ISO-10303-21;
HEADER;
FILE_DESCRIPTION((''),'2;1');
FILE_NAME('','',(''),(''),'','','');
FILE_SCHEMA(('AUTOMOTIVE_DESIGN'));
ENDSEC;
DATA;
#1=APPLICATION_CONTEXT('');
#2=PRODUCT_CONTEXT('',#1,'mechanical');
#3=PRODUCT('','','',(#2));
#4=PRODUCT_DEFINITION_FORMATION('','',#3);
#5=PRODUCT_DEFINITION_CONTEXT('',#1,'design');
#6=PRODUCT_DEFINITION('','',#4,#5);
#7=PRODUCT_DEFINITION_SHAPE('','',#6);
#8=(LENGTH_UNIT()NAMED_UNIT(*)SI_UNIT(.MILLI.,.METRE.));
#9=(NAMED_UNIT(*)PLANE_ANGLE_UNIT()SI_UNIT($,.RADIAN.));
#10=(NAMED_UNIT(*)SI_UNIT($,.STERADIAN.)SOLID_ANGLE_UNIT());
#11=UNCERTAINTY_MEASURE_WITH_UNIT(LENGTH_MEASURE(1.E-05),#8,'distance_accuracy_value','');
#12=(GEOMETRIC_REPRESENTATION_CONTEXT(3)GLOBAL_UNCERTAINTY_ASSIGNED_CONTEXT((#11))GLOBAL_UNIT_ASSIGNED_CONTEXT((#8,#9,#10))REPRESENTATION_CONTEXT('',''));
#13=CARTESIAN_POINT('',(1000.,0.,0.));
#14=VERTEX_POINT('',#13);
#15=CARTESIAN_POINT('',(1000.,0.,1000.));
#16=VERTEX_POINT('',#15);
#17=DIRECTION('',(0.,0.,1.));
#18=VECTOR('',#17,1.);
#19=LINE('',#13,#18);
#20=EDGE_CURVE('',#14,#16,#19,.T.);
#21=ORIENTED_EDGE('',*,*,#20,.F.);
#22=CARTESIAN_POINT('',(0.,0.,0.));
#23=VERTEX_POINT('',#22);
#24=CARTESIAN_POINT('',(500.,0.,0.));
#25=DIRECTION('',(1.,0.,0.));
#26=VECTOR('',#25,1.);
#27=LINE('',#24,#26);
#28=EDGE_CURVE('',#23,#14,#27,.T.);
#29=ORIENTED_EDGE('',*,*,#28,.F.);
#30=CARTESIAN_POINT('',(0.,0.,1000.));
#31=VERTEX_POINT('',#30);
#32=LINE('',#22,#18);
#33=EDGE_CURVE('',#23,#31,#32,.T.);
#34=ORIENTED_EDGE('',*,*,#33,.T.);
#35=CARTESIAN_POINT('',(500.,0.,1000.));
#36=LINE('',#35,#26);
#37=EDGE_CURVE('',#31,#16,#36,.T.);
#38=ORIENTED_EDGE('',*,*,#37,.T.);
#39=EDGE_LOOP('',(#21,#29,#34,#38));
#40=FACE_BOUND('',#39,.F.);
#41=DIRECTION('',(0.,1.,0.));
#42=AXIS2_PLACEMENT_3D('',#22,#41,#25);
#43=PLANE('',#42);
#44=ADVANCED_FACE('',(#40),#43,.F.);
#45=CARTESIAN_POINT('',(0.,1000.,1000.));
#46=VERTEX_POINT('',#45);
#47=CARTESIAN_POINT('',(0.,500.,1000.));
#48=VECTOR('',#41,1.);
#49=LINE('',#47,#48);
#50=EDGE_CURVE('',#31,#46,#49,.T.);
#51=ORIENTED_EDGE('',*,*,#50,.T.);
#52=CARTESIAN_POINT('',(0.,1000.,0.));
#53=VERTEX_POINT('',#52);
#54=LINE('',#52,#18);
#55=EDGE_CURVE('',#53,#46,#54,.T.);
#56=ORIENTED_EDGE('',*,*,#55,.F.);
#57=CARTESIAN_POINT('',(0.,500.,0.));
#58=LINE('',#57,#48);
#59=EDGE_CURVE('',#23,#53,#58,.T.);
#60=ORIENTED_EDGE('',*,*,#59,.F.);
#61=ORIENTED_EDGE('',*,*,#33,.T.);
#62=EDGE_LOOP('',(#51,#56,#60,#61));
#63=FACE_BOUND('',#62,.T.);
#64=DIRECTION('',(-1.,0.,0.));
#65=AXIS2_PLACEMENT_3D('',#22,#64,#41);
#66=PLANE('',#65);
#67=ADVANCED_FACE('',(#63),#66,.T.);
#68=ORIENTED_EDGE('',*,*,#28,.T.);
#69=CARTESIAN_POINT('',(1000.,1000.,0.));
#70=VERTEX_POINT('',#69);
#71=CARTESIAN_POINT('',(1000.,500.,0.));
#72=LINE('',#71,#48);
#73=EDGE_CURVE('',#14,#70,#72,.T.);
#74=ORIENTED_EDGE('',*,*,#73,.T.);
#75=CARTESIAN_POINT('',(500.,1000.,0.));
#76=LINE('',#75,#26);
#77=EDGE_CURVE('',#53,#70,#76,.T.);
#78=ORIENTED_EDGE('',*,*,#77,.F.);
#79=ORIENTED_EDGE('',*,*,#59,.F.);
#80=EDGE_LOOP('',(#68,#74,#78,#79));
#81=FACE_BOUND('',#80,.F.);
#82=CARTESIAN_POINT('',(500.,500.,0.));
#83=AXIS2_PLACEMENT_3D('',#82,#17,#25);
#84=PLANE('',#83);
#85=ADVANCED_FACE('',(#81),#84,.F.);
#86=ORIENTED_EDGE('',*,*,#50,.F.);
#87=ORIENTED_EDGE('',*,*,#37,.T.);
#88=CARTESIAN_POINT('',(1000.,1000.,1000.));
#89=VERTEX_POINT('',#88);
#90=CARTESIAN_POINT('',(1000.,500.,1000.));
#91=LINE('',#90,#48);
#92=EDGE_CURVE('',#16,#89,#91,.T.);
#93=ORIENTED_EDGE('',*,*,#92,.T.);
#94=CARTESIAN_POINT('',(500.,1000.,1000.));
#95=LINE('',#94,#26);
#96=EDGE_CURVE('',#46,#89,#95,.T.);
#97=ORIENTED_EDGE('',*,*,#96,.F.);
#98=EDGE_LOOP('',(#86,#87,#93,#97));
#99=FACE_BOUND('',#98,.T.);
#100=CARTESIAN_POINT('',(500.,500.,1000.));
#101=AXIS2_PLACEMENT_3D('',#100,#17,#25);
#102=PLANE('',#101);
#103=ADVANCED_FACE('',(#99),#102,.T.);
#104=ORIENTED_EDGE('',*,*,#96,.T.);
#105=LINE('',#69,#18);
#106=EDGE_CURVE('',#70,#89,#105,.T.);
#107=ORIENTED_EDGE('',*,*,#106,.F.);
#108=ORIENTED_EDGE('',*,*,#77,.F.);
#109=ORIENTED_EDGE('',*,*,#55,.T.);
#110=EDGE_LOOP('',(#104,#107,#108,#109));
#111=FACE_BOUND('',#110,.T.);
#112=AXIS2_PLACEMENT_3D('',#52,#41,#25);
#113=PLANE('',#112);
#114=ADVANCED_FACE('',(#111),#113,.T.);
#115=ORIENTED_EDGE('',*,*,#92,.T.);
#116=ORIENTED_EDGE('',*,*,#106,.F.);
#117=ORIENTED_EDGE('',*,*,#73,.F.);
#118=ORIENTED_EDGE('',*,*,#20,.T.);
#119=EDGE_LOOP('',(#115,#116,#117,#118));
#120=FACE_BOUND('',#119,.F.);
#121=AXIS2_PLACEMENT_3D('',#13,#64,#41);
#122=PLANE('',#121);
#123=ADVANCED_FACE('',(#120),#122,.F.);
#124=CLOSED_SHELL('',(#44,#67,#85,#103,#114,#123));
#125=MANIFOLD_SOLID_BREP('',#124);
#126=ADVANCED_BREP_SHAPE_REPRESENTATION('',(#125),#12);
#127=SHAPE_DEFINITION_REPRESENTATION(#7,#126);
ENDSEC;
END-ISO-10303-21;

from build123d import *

# Parameters (mm, degrees)
F1_E0_W  = 1000
F1_E0_H  = 1000
F2_DEPTH = 1000


with BuildPart() as f2:
    # F1_E0 (on explicit) → F2 (new body)
    with BuildSketch(Plane.XY):
        with Locations((500, 500)):
            Rectangle(F1_E0_W, F1_E0_H)
    extrude(amount=F2_DEPTH)


solid = f2.part
